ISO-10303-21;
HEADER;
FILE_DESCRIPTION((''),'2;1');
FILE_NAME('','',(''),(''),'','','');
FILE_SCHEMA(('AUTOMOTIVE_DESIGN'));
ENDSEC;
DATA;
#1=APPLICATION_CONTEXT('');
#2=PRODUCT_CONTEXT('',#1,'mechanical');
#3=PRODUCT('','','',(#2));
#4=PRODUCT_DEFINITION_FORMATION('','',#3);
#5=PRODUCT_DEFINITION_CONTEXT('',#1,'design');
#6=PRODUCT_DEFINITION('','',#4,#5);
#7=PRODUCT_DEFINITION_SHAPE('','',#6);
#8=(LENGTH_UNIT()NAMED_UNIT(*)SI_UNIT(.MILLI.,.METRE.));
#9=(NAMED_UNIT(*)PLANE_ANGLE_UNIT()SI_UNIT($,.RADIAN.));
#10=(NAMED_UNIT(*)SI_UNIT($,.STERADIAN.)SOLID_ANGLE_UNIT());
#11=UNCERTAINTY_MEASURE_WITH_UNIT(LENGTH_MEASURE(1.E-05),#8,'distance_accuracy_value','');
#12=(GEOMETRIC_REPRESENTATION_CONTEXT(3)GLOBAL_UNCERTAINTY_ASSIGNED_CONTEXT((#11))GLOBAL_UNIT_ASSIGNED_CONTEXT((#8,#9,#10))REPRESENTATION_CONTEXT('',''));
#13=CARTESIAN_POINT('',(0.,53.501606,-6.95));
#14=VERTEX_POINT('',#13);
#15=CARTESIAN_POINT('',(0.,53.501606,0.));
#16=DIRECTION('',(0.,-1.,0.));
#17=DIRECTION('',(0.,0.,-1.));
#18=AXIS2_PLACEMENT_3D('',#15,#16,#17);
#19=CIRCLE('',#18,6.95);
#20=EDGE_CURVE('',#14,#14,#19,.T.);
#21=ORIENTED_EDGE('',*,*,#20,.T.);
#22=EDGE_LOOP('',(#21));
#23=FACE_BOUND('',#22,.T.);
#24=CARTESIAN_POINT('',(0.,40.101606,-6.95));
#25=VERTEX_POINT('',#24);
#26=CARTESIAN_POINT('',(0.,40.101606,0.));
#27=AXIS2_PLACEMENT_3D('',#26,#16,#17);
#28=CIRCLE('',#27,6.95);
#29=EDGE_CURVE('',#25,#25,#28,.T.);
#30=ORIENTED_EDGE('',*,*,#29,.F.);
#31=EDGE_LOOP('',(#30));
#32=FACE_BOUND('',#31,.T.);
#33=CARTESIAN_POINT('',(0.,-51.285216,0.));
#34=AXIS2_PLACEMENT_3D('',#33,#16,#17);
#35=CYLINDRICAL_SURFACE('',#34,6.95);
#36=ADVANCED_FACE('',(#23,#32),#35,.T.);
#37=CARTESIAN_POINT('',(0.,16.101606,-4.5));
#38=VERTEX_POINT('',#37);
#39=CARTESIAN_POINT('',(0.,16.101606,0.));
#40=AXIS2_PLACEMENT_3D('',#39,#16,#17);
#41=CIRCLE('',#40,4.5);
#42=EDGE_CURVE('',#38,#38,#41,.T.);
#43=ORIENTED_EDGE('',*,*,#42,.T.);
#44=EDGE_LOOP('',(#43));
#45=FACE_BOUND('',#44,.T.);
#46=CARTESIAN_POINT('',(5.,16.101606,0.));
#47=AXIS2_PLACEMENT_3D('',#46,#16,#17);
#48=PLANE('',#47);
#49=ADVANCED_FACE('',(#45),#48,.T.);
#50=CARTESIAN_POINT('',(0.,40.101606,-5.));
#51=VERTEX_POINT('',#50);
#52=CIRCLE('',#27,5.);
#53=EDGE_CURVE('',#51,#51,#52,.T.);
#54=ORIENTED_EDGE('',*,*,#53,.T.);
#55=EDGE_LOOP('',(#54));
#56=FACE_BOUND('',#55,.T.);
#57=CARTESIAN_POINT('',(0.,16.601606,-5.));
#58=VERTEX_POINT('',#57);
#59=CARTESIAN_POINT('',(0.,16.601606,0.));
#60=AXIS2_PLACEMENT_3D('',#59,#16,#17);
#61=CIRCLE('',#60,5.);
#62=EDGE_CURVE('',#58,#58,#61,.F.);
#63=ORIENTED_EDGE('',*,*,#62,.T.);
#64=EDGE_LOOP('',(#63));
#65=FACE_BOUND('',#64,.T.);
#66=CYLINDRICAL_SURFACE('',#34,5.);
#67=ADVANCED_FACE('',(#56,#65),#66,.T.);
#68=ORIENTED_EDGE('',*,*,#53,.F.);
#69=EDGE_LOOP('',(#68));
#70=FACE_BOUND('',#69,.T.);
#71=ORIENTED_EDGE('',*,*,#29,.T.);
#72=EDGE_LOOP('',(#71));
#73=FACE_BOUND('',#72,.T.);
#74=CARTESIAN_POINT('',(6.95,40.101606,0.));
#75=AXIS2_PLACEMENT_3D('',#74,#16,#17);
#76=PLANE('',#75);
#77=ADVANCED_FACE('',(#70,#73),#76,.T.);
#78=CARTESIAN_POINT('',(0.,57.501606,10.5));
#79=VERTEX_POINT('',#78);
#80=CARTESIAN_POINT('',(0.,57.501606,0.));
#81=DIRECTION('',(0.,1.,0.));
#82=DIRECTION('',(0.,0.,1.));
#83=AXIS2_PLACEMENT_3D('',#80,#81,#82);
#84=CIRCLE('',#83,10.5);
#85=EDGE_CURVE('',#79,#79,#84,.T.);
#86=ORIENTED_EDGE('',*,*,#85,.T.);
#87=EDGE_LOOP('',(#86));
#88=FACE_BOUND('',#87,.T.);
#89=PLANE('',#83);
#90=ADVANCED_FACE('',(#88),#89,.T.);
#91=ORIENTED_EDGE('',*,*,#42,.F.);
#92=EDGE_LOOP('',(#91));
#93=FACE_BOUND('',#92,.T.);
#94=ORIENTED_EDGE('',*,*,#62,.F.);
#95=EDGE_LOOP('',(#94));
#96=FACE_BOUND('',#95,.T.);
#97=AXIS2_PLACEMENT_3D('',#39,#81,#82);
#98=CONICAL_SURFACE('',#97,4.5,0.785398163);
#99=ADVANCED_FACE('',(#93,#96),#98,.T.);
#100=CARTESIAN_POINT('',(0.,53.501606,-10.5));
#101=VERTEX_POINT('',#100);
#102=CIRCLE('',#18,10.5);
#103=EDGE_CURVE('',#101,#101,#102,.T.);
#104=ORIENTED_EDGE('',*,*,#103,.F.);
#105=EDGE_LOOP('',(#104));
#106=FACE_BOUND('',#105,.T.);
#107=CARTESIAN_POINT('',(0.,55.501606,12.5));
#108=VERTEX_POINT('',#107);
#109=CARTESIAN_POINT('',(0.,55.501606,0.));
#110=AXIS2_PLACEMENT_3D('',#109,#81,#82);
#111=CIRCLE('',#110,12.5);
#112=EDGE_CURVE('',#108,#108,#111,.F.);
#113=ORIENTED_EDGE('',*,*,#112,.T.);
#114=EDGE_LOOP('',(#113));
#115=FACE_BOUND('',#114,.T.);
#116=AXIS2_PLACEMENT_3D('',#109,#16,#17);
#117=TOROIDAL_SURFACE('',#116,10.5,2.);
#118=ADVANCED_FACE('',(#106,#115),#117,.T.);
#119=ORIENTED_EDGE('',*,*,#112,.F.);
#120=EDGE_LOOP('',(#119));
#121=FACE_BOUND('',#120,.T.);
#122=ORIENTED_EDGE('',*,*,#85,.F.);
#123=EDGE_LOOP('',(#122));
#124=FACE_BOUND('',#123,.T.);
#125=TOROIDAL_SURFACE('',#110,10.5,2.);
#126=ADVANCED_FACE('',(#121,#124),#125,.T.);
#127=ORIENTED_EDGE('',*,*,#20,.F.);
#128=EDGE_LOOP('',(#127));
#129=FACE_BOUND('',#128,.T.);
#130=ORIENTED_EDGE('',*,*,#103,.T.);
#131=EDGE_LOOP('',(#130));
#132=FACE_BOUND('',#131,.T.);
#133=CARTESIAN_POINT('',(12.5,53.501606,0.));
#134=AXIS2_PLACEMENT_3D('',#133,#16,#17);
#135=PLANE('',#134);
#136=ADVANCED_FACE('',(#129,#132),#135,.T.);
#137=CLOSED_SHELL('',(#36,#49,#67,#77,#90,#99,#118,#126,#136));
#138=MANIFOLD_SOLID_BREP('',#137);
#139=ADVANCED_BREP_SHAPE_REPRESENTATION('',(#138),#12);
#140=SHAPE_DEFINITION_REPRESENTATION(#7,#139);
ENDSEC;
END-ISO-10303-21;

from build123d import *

# Parameters (mm, degrees)
FILETE1_R     = 2
CHANFRO1_SIZE = 0.5


with BuildPart() as part:
    # Esboço1 → Revolução1 (revolve)
    with BuildSketch(Plane.XY, mode=Mode.PRIVATE) as revolu_o1_sk:
        Polygon((0, 57.501605759), (12.5, 57.501605759), (12.5, 53.501605759), (6.95, 53.501605759), (6.95, 40.101605759), (5, 40.101605759), (5, 16.101605759), (0, 16.101605759), align=None)
    revolve(revolu_o1_sk.sketch.rotate(Axis((0, -51.285215947, 0), (0, 1, 0)), 90), axis=Axis((0, -51.285215947, 0), (0, 1, 0)))

    # Filete1
    filete1_edges = [part.edges().sort_by_distance(p)[0] for p in [
        (0, 53.501605759, 12.5),
        (0, 57.501605759, 12.5),
    ]]
    fillet(filete1_edges, radius=FILETE1_R - 0.0001)  # a hair under: the kernel refuses the full size

    # Chanfro1
    chanfro1_edges = [part.edges().sort_by_distance(p)[0] for p in [
        (0, 16.101605759, 5),
    ]]
    chamfer(chanfro1_edges, length=CHANFRO1_SIZE)


solid = part.part
